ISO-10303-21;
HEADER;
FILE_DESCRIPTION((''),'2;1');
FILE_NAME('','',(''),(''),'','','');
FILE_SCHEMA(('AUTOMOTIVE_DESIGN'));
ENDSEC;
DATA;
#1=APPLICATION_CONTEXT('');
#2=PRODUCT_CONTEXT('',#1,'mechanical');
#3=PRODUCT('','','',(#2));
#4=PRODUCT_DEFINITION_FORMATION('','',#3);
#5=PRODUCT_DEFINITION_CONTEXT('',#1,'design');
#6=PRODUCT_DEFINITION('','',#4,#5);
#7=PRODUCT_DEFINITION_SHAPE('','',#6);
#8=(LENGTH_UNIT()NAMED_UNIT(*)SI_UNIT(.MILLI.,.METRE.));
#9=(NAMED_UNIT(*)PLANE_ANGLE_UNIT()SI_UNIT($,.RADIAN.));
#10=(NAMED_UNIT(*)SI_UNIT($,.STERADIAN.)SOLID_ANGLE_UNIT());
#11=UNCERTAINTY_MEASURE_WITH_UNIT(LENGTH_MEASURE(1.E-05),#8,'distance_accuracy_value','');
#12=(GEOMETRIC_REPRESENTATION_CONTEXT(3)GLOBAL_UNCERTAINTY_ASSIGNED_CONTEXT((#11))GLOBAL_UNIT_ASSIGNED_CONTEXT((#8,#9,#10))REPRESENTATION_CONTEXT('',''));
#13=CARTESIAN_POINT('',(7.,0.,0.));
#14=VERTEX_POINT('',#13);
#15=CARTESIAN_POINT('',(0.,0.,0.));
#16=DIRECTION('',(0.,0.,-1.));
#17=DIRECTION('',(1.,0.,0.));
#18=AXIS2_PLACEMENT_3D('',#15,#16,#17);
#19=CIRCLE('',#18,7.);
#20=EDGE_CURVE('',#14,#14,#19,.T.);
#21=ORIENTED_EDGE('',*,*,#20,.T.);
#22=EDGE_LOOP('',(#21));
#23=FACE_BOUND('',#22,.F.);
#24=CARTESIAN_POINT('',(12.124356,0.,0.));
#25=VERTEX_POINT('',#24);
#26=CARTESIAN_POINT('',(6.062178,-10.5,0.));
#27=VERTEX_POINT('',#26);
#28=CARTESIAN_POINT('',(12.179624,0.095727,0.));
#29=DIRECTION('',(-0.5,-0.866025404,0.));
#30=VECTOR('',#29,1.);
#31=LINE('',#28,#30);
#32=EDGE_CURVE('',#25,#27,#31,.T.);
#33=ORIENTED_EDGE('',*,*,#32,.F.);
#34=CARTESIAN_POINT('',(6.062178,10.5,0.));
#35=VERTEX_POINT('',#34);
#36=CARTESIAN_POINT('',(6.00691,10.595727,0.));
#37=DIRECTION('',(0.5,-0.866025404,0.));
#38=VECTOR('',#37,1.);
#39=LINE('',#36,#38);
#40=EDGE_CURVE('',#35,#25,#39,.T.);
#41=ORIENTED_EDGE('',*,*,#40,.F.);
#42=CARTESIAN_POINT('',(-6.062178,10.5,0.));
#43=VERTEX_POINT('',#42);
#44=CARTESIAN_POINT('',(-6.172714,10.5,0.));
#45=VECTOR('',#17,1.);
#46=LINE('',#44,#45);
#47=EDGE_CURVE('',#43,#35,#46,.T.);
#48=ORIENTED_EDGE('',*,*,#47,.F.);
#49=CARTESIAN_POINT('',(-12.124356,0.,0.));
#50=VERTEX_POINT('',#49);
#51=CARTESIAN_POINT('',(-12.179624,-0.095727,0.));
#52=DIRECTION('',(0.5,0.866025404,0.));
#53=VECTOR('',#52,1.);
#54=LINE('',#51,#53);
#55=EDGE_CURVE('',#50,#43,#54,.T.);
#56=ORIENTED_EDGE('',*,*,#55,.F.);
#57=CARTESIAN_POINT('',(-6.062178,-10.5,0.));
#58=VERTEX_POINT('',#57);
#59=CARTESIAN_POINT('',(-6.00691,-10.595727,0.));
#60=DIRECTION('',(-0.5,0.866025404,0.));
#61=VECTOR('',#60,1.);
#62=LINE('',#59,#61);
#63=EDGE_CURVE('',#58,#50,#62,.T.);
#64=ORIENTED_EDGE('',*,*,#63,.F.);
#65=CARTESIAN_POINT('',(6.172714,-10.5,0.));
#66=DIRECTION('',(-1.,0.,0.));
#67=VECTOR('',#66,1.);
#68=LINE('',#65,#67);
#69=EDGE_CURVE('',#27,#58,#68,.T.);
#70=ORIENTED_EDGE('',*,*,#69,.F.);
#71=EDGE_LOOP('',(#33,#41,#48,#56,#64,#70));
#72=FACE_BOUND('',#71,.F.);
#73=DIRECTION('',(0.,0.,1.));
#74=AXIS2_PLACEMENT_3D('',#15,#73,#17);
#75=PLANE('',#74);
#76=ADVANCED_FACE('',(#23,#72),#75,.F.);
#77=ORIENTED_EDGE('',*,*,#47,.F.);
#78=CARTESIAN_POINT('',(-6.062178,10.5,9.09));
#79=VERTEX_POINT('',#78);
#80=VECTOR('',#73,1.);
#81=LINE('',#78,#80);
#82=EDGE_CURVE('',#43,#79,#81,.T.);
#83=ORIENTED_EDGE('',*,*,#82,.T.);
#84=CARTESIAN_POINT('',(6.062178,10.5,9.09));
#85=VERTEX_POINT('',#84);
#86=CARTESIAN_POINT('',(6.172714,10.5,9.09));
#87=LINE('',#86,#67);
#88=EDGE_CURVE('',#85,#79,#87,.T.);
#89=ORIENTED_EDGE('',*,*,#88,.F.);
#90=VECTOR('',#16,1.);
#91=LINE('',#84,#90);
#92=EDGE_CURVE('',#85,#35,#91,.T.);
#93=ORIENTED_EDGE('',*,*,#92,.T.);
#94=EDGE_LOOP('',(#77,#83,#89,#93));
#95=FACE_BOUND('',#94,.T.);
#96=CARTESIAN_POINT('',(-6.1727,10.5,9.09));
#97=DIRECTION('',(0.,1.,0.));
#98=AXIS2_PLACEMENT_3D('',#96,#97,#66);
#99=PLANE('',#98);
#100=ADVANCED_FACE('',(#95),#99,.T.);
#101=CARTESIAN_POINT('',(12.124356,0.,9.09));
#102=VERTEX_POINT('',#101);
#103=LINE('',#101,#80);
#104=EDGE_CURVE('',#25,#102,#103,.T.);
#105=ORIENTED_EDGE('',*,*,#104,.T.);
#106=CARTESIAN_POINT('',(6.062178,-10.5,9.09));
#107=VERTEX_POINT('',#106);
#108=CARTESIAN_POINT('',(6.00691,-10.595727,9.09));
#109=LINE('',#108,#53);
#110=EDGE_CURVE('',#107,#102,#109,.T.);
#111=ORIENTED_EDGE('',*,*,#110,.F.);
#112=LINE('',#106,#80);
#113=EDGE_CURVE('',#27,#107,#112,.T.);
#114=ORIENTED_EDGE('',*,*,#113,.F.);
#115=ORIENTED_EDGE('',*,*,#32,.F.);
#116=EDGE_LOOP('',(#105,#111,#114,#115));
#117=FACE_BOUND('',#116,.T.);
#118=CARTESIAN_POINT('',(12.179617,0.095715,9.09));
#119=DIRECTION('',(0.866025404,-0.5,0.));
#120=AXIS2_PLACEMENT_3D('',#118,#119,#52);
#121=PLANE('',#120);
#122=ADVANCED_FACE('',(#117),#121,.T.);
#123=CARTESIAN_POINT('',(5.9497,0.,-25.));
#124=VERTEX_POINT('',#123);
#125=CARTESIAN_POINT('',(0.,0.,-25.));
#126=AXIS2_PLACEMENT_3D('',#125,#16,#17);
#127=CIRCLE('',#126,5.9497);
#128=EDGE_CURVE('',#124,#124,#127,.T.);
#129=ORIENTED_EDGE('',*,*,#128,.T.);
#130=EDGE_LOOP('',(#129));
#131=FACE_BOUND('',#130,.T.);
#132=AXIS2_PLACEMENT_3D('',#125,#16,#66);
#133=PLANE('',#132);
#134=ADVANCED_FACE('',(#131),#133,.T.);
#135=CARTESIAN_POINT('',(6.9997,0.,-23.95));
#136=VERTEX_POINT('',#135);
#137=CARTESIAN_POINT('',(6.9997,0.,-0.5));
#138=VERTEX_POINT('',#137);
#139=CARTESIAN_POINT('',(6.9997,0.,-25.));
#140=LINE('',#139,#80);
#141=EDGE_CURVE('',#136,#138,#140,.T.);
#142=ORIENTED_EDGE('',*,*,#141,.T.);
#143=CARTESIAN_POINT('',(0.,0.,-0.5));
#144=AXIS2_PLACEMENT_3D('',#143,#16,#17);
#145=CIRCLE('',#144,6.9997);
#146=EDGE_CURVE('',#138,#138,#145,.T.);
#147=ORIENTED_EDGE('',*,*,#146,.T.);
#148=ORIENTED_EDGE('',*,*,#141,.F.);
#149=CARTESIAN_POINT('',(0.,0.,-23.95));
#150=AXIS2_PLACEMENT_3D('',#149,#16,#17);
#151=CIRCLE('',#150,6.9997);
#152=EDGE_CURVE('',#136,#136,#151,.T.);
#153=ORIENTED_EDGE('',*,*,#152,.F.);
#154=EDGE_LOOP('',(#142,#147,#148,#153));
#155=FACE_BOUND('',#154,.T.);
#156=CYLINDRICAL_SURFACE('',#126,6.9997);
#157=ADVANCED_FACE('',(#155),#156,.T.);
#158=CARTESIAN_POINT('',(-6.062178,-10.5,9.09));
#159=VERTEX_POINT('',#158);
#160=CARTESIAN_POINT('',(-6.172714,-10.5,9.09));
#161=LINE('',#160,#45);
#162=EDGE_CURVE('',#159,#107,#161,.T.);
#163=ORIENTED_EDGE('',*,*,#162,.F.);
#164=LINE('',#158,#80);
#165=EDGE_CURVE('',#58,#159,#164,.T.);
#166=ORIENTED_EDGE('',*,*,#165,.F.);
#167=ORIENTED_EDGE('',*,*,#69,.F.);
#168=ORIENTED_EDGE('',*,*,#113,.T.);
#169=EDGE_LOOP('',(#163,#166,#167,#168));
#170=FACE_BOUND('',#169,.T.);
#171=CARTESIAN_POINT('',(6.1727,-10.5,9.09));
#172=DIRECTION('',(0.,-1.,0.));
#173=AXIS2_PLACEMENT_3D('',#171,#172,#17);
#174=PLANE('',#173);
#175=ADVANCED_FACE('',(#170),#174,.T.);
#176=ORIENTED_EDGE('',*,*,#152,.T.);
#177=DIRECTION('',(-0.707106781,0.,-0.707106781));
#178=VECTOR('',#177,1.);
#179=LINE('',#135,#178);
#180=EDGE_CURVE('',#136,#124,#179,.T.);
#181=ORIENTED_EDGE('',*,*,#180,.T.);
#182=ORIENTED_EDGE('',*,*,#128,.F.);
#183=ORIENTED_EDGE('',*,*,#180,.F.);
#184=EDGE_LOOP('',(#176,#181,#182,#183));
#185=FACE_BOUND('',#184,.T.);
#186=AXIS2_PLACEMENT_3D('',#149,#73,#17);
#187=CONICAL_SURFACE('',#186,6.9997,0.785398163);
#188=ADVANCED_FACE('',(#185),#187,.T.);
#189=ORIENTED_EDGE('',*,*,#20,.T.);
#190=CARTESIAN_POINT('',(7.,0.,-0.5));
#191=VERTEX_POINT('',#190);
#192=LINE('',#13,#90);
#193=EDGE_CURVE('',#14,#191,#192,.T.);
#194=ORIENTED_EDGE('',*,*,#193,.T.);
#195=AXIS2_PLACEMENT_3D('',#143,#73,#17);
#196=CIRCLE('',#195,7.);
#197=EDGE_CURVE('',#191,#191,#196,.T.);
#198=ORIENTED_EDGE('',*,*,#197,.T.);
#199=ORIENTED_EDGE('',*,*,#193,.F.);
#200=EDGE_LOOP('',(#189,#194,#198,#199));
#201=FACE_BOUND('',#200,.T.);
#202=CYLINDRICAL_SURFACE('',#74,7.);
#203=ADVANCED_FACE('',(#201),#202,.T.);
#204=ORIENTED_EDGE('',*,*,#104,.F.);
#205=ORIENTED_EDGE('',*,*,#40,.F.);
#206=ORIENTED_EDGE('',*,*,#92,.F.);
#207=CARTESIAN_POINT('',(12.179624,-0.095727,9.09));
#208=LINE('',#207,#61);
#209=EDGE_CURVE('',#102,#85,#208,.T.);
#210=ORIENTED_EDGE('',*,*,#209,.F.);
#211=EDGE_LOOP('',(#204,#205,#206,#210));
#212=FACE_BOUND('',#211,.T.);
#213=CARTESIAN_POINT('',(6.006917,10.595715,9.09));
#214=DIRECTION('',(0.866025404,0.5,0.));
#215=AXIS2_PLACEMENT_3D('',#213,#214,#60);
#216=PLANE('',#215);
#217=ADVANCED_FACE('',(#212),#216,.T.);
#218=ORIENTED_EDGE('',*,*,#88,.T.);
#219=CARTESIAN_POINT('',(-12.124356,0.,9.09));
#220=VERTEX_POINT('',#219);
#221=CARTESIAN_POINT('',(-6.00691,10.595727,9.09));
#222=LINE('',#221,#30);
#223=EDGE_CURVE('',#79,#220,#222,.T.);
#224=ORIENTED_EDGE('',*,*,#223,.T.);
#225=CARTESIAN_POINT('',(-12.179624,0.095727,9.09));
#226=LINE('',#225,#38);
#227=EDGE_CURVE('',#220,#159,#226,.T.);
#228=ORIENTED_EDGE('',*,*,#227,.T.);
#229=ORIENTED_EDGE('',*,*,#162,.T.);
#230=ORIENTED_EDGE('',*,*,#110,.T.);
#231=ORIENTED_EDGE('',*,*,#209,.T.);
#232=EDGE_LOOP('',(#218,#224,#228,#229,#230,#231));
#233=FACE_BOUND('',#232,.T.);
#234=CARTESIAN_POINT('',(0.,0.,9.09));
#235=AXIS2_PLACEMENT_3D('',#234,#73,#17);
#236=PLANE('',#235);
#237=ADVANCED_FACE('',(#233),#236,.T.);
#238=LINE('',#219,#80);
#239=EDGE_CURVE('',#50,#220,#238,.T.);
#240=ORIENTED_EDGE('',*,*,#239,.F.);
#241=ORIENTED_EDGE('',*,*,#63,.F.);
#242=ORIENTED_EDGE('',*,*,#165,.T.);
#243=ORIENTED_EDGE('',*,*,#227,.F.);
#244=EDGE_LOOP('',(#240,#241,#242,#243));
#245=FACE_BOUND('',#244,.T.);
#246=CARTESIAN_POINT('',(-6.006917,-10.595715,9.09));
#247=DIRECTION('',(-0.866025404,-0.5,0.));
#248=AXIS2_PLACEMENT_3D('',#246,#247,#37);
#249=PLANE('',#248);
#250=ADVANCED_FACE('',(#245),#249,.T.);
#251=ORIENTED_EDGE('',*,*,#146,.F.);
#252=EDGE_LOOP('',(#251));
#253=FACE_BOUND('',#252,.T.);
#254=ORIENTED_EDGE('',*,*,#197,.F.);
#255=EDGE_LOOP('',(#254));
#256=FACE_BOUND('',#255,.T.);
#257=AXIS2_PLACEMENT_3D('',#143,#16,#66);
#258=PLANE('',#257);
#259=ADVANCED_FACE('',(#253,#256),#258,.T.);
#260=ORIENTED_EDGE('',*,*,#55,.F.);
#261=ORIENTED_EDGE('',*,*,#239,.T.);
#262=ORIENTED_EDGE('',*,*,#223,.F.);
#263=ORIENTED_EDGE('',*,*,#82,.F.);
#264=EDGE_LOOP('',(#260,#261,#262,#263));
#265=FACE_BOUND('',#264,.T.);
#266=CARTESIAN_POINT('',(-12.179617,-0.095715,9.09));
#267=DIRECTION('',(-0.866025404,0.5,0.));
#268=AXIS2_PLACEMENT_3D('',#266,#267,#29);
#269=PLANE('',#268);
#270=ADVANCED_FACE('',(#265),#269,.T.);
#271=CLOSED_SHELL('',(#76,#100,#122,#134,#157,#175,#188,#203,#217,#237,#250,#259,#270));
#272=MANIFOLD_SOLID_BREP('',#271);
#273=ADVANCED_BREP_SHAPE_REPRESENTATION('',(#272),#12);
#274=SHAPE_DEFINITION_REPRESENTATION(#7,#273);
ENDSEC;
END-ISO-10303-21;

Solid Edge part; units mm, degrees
sketch "Sketch1" plane through (0, 0, 0) normal (0, 0, 1) x (1, 0, 0)
  circle A0 centre (0, 0) radius 12.18
  dimension "D1" = 24.36
extrude "Protrusion1" add sketch "Sketch1" along normal blind 9.09
sketch "Sketch2" plane through (0, 0, 0) normal (0, 0, -1) x (1, 0, 0)
  circle A0 centre (0, 0) radius 7
extrude "Protrusion2" add sketch "Sketch2" along normal blind 25
sketch "Sketch3" plane through (0, 0, -25) normal (0, 0, -1) x (1, 0, 0)
  circle A0 centre (0, 0) radius 6.9997
extrude "Cutout1" cut sketch "Sketch3" against normal blind 24.5 flip side to cut
chamfer "Chamfer_1" distance 1.05 angle 45 1 edges at (-6.9997, 0, -25)
sketch "Sketch4" plane through (0, 0, 9.09) normal (0, 0, 1) x (1, 0, 0)
  line L0 (-6.1727, 10.5) -> (6.1727, 10.5)
  dimension "D1" = 21
extrude "Cutout2" cut sketch "Sketch4" against normal up to next material side at (0, 10.55, 9.09)
pattern_circular "Pattern1" count 6 over 360 about axis through (0, 0, 9.09) along (0, 0, 1) of "Cutout2"
properties part number "202117"
